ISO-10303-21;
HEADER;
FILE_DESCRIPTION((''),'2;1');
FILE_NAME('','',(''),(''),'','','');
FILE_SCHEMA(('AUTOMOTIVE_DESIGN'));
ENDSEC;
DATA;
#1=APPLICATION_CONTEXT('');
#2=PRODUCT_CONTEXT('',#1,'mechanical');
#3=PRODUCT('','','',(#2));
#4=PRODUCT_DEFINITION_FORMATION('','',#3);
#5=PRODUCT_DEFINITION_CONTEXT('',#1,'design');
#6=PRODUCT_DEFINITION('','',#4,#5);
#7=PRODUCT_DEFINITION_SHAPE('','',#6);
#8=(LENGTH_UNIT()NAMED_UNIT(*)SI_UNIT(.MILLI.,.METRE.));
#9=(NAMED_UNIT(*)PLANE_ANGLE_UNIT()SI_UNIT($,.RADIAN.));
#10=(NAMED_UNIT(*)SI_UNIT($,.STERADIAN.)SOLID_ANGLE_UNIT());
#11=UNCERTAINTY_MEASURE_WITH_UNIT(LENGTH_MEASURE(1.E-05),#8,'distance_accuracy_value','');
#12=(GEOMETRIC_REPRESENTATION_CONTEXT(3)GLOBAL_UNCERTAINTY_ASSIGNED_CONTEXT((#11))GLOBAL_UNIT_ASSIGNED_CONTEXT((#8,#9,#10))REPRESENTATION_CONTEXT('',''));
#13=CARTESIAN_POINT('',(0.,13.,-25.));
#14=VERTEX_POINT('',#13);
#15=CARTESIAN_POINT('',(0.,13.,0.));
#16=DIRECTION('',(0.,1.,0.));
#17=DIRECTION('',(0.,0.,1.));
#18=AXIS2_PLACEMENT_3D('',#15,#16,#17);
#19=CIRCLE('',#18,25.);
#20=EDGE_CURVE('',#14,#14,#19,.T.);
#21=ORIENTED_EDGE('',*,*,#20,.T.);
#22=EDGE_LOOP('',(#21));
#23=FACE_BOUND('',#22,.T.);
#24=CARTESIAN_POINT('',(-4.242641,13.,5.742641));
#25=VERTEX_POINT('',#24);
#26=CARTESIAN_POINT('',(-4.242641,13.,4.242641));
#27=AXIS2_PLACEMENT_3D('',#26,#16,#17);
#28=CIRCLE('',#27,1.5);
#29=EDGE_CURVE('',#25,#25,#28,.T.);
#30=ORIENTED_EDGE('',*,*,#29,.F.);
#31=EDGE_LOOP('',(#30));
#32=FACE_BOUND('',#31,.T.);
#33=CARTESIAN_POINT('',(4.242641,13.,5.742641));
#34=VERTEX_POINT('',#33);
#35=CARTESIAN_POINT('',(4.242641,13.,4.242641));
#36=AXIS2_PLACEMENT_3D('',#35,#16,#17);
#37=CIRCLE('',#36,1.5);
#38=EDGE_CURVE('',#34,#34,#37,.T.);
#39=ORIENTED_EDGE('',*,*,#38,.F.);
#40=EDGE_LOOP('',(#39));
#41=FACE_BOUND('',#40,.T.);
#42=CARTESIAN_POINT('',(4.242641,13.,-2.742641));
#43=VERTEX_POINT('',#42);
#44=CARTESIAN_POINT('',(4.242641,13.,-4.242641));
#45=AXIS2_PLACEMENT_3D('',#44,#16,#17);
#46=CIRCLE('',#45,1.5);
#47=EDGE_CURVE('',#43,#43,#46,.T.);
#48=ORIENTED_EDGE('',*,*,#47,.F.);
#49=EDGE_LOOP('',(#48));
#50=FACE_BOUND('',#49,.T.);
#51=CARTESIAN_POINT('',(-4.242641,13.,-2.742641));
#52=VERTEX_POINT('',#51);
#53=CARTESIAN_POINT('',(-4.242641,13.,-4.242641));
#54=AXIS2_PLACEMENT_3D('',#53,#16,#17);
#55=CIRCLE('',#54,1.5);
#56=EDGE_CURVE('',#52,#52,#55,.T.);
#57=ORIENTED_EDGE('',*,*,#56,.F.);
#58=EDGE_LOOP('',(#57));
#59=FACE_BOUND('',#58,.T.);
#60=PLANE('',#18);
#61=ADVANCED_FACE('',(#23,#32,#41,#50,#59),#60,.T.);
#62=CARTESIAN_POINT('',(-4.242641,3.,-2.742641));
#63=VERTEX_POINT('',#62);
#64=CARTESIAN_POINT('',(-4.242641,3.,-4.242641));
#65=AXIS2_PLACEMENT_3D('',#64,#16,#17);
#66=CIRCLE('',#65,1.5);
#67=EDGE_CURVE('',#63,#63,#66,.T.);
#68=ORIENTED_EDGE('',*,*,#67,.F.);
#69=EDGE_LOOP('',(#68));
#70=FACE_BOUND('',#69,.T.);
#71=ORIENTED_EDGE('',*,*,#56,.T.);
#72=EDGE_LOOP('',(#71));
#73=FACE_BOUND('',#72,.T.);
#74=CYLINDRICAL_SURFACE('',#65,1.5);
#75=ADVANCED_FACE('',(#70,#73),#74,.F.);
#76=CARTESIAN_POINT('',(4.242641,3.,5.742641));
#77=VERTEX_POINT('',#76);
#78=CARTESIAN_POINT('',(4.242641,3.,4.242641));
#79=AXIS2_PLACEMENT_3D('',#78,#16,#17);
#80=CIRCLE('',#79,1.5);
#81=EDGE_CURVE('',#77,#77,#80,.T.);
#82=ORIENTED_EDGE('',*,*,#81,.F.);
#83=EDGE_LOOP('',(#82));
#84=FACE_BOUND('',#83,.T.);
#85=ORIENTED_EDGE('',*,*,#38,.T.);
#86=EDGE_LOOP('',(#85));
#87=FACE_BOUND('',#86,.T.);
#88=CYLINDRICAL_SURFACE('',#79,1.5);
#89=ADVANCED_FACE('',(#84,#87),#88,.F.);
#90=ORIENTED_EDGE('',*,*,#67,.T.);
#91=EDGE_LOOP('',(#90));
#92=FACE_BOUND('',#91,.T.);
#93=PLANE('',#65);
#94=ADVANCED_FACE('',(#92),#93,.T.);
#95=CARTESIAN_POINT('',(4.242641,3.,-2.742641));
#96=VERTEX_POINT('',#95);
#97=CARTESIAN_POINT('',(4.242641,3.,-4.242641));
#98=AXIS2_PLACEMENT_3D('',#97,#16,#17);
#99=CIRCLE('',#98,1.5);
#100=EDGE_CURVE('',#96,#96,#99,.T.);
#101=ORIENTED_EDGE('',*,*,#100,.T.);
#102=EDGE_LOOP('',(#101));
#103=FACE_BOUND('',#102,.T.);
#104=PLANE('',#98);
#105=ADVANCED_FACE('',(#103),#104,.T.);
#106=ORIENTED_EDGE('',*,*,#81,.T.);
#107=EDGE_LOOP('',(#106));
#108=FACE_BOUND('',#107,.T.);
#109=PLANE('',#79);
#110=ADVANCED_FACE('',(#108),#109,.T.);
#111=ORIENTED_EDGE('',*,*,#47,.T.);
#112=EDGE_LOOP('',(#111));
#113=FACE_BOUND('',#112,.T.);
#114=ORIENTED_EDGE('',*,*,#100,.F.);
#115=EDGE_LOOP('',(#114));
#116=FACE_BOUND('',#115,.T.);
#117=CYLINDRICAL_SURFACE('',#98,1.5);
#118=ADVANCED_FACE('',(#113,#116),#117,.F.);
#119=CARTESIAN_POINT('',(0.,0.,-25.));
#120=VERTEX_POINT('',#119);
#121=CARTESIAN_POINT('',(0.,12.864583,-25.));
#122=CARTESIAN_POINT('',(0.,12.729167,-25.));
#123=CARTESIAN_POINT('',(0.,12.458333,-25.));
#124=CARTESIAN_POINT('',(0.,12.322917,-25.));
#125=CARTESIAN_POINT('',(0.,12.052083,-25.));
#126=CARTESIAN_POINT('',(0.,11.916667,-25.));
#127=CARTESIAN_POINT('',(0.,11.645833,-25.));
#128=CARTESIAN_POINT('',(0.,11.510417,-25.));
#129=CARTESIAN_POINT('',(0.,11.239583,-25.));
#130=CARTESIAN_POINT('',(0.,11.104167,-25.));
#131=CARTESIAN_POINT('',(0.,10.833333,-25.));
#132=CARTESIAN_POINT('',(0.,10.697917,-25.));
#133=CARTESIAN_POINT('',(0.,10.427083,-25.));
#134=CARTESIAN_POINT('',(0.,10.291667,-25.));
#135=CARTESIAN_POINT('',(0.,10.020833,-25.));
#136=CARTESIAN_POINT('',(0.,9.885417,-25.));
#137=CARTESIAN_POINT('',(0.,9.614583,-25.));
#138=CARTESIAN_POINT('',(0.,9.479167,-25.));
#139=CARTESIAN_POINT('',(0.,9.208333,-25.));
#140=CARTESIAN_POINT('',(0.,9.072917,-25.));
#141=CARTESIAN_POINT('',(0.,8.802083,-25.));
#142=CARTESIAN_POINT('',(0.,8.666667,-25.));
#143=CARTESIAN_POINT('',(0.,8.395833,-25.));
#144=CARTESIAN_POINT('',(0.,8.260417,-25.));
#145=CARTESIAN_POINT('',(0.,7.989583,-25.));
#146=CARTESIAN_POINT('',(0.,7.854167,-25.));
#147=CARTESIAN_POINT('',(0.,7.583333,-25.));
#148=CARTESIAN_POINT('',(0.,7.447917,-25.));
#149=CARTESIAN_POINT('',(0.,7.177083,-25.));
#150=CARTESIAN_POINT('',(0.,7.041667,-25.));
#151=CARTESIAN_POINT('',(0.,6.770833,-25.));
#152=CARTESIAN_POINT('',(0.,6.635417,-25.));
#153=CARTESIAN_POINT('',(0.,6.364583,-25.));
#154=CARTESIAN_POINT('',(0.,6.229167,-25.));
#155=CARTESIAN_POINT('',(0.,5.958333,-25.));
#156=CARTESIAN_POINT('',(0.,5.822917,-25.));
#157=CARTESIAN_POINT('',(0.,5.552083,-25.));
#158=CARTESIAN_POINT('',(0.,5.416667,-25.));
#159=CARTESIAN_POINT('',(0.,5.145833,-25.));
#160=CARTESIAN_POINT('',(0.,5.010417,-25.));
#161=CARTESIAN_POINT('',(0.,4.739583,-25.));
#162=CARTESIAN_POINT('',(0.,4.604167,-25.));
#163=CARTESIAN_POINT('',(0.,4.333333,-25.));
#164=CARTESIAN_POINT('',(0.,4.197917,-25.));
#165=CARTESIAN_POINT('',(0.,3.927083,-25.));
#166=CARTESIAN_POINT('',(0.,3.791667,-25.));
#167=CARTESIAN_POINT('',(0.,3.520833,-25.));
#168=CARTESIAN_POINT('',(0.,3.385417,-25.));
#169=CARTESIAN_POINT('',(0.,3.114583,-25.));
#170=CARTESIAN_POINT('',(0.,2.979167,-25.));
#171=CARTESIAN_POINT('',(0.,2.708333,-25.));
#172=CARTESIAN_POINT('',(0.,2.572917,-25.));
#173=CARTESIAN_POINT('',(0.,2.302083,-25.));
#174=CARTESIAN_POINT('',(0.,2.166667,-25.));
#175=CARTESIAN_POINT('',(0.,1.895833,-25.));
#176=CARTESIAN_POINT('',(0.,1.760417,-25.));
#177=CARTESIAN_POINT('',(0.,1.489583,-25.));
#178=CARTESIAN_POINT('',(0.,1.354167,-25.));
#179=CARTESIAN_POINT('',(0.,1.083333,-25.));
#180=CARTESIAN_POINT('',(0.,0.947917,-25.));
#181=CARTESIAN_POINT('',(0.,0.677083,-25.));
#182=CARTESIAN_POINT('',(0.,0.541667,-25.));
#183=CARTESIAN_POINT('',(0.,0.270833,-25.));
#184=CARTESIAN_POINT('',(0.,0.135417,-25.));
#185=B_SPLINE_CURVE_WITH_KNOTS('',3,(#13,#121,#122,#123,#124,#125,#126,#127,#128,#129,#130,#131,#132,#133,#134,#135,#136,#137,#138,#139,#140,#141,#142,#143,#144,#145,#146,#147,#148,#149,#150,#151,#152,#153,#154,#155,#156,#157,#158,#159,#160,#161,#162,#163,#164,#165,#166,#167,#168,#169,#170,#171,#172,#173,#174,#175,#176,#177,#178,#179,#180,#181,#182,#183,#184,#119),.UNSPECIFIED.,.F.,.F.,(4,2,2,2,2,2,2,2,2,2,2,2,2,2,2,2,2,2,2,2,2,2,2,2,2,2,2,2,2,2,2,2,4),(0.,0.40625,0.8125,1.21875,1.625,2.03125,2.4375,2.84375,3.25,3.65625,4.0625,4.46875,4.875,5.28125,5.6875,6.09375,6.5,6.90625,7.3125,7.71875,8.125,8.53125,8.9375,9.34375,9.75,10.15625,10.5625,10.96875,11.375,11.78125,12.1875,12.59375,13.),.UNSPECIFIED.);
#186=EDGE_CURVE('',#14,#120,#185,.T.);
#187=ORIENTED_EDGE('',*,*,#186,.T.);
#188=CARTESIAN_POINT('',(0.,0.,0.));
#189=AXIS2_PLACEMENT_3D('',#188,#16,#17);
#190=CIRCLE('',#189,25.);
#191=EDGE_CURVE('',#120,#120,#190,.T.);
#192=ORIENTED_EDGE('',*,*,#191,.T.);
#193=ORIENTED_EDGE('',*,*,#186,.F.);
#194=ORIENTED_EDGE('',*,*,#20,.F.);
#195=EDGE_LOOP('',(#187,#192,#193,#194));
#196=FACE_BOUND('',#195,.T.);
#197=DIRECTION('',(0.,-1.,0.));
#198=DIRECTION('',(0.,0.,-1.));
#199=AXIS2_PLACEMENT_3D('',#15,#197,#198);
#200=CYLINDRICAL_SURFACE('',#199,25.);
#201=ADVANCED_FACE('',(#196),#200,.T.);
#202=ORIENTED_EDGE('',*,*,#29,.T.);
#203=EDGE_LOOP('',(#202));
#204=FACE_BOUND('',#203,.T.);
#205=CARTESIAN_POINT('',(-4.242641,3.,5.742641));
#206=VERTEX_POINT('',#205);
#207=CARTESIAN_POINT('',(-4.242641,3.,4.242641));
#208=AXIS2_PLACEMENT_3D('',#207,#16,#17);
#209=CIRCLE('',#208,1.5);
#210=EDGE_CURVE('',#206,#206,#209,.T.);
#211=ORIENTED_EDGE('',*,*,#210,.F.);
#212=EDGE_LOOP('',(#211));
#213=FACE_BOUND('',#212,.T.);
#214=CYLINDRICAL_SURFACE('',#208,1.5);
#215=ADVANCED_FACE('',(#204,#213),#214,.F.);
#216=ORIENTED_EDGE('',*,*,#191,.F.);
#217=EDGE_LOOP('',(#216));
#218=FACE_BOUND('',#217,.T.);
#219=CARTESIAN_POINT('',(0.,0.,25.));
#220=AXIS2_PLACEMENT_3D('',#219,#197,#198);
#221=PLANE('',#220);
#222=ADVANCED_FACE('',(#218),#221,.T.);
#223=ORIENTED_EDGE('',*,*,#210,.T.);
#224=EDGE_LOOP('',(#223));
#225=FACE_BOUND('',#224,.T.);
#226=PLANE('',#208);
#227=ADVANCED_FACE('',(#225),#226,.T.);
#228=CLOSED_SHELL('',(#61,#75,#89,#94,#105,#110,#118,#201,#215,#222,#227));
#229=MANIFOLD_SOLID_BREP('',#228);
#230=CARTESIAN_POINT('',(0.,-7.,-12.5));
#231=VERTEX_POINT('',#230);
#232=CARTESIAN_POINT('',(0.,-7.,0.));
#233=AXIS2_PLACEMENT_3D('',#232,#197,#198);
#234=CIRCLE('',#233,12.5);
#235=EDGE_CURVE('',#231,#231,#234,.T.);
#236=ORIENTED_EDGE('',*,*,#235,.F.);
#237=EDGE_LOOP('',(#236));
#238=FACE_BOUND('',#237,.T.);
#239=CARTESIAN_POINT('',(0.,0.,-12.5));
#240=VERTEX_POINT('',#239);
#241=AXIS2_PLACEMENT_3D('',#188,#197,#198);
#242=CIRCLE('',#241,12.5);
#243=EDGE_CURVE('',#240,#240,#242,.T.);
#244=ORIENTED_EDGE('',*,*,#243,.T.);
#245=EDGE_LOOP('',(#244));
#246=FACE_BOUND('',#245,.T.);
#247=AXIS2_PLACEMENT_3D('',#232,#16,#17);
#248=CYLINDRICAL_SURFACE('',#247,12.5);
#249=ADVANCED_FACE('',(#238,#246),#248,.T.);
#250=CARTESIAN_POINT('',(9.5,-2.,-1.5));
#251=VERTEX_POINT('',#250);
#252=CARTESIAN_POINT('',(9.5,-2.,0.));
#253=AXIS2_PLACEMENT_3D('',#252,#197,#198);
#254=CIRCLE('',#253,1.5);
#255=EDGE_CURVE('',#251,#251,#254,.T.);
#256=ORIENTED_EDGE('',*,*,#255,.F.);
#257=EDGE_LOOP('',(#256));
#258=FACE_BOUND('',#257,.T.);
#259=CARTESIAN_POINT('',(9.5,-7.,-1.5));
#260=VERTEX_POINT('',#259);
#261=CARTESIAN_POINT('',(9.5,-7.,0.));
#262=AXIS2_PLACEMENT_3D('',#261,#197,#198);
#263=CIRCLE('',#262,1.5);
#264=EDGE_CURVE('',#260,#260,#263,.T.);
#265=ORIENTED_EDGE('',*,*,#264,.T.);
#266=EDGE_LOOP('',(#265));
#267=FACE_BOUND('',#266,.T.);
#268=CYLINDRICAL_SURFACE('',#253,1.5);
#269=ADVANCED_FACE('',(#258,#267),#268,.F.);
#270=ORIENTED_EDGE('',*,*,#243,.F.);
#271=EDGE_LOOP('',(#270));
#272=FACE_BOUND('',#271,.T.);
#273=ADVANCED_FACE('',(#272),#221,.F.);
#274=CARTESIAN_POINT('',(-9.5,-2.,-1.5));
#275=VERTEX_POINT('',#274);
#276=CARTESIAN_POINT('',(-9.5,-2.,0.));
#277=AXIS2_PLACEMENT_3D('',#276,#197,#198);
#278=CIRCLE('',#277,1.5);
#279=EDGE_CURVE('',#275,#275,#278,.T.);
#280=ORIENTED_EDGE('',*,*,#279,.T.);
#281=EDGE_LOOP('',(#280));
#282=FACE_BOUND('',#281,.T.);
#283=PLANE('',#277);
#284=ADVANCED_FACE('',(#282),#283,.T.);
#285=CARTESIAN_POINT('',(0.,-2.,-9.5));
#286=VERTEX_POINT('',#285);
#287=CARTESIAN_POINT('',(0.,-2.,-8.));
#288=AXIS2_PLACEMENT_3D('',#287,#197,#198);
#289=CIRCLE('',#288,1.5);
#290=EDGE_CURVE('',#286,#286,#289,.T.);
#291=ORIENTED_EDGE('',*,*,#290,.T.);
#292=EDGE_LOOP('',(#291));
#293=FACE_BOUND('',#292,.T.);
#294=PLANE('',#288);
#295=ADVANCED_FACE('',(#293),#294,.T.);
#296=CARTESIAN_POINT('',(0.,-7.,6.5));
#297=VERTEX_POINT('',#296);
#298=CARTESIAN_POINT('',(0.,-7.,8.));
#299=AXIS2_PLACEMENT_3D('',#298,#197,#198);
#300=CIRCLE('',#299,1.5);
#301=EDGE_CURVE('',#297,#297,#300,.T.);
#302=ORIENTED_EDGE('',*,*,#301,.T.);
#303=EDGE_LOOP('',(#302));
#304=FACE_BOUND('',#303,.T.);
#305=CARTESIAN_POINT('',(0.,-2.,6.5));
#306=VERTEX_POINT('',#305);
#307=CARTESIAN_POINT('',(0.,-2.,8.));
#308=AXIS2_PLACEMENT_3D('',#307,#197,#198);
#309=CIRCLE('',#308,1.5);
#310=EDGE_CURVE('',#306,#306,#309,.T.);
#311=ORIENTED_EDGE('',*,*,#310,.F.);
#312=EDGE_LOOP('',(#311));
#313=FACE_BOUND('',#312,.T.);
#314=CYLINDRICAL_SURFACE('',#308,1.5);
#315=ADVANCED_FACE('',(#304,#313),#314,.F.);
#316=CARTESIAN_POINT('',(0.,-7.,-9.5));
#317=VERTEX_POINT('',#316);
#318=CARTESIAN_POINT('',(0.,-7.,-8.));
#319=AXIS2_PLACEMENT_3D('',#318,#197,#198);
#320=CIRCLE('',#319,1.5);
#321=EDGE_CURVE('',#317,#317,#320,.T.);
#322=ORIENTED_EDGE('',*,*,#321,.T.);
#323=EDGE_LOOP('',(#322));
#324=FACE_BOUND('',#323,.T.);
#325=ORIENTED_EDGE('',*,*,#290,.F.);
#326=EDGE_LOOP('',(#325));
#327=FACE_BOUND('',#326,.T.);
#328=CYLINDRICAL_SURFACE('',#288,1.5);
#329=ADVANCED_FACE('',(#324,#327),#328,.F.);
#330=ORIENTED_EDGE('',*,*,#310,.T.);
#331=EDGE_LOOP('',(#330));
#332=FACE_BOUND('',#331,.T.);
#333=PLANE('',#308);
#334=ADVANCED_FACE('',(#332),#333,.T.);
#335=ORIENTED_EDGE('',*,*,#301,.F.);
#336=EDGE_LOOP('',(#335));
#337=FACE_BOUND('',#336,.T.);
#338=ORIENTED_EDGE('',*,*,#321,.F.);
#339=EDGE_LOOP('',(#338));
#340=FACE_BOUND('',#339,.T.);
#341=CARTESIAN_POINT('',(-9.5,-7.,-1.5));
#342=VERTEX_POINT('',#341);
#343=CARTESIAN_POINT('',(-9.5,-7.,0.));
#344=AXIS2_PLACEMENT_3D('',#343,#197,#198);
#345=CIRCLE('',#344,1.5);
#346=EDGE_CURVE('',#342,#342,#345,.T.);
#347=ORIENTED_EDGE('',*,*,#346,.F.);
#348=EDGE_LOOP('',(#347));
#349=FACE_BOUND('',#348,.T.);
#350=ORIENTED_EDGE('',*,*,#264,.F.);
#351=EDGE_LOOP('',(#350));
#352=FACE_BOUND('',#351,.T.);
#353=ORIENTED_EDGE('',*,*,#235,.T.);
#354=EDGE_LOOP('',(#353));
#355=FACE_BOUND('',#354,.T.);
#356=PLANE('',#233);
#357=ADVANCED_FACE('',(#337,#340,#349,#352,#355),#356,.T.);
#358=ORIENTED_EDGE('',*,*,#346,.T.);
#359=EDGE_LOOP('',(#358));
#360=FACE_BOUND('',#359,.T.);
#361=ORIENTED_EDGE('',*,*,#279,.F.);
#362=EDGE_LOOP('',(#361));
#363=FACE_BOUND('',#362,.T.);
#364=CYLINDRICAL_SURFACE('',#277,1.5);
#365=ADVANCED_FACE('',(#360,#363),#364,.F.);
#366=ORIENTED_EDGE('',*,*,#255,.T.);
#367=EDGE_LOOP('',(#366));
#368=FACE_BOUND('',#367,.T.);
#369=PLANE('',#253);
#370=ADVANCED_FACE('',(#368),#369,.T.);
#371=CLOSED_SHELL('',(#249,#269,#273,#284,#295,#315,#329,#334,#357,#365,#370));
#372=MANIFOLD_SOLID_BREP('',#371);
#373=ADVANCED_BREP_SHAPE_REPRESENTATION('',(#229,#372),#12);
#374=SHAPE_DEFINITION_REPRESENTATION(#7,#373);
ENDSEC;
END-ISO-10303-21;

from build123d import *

# Parameters (mm, degrees)
SKETCH1_R           = 25
BOSS_EXTRUDE1_DEPTH = 13
SKETCH2_R           = 12.5
BOSS_EXTRUDE2_DEPTH = 7
SKETCH3_R           = 1.5
CUT_EXTRUDE1_DEPTH  = 10
SKETCH4_R           = 1.5
CUT_EXTRUDE2_DEPTH  = 5


# Read off the part's stored shape, not the designer's step: Split1
with BuildPart() as part:
    # Sketch1 → Boss-Extrude1 (new body)
    with BuildSketch(Plane(origin=(0, 0, 0), x_dir=(1, 0, 0), z_dir=(0, 1, 0))):
        with Locations(Location((0, 0, 0), (0, 0, 90))):
            Circle(SKETCH1_R)
    extrude(amount=BOSS_EXTRUDE1_DEPTH)

    # Sketch2 → Boss-Extrude2 (add)
    with BuildSketch(Plane.XZ):
        with Locations(Location((0, 0, 0), (0, 0, 270))):
            Circle(SKETCH2_R)
    extrude(amount=BOSS_EXTRUDE2_DEPTH)

    # Sketch3 → Cut-Extrude1 (cut)
    with BuildSketch(Plane(origin=(0, 13, 0), x_dir=(1, 0, 0), z_dir=(0, 1, 0))):
        with Locations(Location((-4.242640687, 4.242640687, 0), (0, 0, 270))):
            Circle(SKETCH3_R)
        with Locations(Location((4.242640687, 4.242640687, 0), (0, 0, 270))):
            Circle(SKETCH3_R)
        with Locations(Location((4.242640687, -4.242640687, 0), (0, 0, 270))):
            Circle(SKETCH3_R)
        with Locations(Location((-4.242640687, -4.242640687, 0), (0, 0, 270))):
            Circle(SKETCH3_R)
    extrude(amount=-CUT_EXTRUDE1_DEPTH, mode=Mode.SUBTRACT)

    # Sketch4 → Cut-Extrude2 (cut)
    with BuildSketch(Plane.XZ.offset(7)):
        with Locations(Location((9.5, 0, 0), (0, 0, 270))):
            Circle(SKETCH4_R)
        with Locations(Location((-9.5, 0, 0), (0, 0, 270))):
            Circle(SKETCH4_R)
        with Locations(Location((0, 8, 0), (0, 0, 270))):
            Circle(SKETCH4_R)
        with Locations(Location((0, -8, 0), (0, 0, 270))):
            Circle(SKETCH4_R)
    extrude(amount=-CUT_EXTRUDE2_DEPTH, mode=Mode.SUBTRACT)


with BuildPart() as body_2:
    # Split1: the piece on the far side of the plane
    add(part.part)
    split(bisect_by=Plane(origin=(0, 0, 0), x_dir=(1, 0, 0), z_dir=(0, 1, 0)), keep=Keep.BOTTOM)


with BuildPart() as part_1:
    add(part.part)

    # Split1
    split(bisect_by=Plane(origin=(0, 0, 0), x_dir=(1, 0, 0), z_dir=(0, 1, 0)), keep=Keep.TOP)


solid = Compound([body_2.part, part_1.part])
